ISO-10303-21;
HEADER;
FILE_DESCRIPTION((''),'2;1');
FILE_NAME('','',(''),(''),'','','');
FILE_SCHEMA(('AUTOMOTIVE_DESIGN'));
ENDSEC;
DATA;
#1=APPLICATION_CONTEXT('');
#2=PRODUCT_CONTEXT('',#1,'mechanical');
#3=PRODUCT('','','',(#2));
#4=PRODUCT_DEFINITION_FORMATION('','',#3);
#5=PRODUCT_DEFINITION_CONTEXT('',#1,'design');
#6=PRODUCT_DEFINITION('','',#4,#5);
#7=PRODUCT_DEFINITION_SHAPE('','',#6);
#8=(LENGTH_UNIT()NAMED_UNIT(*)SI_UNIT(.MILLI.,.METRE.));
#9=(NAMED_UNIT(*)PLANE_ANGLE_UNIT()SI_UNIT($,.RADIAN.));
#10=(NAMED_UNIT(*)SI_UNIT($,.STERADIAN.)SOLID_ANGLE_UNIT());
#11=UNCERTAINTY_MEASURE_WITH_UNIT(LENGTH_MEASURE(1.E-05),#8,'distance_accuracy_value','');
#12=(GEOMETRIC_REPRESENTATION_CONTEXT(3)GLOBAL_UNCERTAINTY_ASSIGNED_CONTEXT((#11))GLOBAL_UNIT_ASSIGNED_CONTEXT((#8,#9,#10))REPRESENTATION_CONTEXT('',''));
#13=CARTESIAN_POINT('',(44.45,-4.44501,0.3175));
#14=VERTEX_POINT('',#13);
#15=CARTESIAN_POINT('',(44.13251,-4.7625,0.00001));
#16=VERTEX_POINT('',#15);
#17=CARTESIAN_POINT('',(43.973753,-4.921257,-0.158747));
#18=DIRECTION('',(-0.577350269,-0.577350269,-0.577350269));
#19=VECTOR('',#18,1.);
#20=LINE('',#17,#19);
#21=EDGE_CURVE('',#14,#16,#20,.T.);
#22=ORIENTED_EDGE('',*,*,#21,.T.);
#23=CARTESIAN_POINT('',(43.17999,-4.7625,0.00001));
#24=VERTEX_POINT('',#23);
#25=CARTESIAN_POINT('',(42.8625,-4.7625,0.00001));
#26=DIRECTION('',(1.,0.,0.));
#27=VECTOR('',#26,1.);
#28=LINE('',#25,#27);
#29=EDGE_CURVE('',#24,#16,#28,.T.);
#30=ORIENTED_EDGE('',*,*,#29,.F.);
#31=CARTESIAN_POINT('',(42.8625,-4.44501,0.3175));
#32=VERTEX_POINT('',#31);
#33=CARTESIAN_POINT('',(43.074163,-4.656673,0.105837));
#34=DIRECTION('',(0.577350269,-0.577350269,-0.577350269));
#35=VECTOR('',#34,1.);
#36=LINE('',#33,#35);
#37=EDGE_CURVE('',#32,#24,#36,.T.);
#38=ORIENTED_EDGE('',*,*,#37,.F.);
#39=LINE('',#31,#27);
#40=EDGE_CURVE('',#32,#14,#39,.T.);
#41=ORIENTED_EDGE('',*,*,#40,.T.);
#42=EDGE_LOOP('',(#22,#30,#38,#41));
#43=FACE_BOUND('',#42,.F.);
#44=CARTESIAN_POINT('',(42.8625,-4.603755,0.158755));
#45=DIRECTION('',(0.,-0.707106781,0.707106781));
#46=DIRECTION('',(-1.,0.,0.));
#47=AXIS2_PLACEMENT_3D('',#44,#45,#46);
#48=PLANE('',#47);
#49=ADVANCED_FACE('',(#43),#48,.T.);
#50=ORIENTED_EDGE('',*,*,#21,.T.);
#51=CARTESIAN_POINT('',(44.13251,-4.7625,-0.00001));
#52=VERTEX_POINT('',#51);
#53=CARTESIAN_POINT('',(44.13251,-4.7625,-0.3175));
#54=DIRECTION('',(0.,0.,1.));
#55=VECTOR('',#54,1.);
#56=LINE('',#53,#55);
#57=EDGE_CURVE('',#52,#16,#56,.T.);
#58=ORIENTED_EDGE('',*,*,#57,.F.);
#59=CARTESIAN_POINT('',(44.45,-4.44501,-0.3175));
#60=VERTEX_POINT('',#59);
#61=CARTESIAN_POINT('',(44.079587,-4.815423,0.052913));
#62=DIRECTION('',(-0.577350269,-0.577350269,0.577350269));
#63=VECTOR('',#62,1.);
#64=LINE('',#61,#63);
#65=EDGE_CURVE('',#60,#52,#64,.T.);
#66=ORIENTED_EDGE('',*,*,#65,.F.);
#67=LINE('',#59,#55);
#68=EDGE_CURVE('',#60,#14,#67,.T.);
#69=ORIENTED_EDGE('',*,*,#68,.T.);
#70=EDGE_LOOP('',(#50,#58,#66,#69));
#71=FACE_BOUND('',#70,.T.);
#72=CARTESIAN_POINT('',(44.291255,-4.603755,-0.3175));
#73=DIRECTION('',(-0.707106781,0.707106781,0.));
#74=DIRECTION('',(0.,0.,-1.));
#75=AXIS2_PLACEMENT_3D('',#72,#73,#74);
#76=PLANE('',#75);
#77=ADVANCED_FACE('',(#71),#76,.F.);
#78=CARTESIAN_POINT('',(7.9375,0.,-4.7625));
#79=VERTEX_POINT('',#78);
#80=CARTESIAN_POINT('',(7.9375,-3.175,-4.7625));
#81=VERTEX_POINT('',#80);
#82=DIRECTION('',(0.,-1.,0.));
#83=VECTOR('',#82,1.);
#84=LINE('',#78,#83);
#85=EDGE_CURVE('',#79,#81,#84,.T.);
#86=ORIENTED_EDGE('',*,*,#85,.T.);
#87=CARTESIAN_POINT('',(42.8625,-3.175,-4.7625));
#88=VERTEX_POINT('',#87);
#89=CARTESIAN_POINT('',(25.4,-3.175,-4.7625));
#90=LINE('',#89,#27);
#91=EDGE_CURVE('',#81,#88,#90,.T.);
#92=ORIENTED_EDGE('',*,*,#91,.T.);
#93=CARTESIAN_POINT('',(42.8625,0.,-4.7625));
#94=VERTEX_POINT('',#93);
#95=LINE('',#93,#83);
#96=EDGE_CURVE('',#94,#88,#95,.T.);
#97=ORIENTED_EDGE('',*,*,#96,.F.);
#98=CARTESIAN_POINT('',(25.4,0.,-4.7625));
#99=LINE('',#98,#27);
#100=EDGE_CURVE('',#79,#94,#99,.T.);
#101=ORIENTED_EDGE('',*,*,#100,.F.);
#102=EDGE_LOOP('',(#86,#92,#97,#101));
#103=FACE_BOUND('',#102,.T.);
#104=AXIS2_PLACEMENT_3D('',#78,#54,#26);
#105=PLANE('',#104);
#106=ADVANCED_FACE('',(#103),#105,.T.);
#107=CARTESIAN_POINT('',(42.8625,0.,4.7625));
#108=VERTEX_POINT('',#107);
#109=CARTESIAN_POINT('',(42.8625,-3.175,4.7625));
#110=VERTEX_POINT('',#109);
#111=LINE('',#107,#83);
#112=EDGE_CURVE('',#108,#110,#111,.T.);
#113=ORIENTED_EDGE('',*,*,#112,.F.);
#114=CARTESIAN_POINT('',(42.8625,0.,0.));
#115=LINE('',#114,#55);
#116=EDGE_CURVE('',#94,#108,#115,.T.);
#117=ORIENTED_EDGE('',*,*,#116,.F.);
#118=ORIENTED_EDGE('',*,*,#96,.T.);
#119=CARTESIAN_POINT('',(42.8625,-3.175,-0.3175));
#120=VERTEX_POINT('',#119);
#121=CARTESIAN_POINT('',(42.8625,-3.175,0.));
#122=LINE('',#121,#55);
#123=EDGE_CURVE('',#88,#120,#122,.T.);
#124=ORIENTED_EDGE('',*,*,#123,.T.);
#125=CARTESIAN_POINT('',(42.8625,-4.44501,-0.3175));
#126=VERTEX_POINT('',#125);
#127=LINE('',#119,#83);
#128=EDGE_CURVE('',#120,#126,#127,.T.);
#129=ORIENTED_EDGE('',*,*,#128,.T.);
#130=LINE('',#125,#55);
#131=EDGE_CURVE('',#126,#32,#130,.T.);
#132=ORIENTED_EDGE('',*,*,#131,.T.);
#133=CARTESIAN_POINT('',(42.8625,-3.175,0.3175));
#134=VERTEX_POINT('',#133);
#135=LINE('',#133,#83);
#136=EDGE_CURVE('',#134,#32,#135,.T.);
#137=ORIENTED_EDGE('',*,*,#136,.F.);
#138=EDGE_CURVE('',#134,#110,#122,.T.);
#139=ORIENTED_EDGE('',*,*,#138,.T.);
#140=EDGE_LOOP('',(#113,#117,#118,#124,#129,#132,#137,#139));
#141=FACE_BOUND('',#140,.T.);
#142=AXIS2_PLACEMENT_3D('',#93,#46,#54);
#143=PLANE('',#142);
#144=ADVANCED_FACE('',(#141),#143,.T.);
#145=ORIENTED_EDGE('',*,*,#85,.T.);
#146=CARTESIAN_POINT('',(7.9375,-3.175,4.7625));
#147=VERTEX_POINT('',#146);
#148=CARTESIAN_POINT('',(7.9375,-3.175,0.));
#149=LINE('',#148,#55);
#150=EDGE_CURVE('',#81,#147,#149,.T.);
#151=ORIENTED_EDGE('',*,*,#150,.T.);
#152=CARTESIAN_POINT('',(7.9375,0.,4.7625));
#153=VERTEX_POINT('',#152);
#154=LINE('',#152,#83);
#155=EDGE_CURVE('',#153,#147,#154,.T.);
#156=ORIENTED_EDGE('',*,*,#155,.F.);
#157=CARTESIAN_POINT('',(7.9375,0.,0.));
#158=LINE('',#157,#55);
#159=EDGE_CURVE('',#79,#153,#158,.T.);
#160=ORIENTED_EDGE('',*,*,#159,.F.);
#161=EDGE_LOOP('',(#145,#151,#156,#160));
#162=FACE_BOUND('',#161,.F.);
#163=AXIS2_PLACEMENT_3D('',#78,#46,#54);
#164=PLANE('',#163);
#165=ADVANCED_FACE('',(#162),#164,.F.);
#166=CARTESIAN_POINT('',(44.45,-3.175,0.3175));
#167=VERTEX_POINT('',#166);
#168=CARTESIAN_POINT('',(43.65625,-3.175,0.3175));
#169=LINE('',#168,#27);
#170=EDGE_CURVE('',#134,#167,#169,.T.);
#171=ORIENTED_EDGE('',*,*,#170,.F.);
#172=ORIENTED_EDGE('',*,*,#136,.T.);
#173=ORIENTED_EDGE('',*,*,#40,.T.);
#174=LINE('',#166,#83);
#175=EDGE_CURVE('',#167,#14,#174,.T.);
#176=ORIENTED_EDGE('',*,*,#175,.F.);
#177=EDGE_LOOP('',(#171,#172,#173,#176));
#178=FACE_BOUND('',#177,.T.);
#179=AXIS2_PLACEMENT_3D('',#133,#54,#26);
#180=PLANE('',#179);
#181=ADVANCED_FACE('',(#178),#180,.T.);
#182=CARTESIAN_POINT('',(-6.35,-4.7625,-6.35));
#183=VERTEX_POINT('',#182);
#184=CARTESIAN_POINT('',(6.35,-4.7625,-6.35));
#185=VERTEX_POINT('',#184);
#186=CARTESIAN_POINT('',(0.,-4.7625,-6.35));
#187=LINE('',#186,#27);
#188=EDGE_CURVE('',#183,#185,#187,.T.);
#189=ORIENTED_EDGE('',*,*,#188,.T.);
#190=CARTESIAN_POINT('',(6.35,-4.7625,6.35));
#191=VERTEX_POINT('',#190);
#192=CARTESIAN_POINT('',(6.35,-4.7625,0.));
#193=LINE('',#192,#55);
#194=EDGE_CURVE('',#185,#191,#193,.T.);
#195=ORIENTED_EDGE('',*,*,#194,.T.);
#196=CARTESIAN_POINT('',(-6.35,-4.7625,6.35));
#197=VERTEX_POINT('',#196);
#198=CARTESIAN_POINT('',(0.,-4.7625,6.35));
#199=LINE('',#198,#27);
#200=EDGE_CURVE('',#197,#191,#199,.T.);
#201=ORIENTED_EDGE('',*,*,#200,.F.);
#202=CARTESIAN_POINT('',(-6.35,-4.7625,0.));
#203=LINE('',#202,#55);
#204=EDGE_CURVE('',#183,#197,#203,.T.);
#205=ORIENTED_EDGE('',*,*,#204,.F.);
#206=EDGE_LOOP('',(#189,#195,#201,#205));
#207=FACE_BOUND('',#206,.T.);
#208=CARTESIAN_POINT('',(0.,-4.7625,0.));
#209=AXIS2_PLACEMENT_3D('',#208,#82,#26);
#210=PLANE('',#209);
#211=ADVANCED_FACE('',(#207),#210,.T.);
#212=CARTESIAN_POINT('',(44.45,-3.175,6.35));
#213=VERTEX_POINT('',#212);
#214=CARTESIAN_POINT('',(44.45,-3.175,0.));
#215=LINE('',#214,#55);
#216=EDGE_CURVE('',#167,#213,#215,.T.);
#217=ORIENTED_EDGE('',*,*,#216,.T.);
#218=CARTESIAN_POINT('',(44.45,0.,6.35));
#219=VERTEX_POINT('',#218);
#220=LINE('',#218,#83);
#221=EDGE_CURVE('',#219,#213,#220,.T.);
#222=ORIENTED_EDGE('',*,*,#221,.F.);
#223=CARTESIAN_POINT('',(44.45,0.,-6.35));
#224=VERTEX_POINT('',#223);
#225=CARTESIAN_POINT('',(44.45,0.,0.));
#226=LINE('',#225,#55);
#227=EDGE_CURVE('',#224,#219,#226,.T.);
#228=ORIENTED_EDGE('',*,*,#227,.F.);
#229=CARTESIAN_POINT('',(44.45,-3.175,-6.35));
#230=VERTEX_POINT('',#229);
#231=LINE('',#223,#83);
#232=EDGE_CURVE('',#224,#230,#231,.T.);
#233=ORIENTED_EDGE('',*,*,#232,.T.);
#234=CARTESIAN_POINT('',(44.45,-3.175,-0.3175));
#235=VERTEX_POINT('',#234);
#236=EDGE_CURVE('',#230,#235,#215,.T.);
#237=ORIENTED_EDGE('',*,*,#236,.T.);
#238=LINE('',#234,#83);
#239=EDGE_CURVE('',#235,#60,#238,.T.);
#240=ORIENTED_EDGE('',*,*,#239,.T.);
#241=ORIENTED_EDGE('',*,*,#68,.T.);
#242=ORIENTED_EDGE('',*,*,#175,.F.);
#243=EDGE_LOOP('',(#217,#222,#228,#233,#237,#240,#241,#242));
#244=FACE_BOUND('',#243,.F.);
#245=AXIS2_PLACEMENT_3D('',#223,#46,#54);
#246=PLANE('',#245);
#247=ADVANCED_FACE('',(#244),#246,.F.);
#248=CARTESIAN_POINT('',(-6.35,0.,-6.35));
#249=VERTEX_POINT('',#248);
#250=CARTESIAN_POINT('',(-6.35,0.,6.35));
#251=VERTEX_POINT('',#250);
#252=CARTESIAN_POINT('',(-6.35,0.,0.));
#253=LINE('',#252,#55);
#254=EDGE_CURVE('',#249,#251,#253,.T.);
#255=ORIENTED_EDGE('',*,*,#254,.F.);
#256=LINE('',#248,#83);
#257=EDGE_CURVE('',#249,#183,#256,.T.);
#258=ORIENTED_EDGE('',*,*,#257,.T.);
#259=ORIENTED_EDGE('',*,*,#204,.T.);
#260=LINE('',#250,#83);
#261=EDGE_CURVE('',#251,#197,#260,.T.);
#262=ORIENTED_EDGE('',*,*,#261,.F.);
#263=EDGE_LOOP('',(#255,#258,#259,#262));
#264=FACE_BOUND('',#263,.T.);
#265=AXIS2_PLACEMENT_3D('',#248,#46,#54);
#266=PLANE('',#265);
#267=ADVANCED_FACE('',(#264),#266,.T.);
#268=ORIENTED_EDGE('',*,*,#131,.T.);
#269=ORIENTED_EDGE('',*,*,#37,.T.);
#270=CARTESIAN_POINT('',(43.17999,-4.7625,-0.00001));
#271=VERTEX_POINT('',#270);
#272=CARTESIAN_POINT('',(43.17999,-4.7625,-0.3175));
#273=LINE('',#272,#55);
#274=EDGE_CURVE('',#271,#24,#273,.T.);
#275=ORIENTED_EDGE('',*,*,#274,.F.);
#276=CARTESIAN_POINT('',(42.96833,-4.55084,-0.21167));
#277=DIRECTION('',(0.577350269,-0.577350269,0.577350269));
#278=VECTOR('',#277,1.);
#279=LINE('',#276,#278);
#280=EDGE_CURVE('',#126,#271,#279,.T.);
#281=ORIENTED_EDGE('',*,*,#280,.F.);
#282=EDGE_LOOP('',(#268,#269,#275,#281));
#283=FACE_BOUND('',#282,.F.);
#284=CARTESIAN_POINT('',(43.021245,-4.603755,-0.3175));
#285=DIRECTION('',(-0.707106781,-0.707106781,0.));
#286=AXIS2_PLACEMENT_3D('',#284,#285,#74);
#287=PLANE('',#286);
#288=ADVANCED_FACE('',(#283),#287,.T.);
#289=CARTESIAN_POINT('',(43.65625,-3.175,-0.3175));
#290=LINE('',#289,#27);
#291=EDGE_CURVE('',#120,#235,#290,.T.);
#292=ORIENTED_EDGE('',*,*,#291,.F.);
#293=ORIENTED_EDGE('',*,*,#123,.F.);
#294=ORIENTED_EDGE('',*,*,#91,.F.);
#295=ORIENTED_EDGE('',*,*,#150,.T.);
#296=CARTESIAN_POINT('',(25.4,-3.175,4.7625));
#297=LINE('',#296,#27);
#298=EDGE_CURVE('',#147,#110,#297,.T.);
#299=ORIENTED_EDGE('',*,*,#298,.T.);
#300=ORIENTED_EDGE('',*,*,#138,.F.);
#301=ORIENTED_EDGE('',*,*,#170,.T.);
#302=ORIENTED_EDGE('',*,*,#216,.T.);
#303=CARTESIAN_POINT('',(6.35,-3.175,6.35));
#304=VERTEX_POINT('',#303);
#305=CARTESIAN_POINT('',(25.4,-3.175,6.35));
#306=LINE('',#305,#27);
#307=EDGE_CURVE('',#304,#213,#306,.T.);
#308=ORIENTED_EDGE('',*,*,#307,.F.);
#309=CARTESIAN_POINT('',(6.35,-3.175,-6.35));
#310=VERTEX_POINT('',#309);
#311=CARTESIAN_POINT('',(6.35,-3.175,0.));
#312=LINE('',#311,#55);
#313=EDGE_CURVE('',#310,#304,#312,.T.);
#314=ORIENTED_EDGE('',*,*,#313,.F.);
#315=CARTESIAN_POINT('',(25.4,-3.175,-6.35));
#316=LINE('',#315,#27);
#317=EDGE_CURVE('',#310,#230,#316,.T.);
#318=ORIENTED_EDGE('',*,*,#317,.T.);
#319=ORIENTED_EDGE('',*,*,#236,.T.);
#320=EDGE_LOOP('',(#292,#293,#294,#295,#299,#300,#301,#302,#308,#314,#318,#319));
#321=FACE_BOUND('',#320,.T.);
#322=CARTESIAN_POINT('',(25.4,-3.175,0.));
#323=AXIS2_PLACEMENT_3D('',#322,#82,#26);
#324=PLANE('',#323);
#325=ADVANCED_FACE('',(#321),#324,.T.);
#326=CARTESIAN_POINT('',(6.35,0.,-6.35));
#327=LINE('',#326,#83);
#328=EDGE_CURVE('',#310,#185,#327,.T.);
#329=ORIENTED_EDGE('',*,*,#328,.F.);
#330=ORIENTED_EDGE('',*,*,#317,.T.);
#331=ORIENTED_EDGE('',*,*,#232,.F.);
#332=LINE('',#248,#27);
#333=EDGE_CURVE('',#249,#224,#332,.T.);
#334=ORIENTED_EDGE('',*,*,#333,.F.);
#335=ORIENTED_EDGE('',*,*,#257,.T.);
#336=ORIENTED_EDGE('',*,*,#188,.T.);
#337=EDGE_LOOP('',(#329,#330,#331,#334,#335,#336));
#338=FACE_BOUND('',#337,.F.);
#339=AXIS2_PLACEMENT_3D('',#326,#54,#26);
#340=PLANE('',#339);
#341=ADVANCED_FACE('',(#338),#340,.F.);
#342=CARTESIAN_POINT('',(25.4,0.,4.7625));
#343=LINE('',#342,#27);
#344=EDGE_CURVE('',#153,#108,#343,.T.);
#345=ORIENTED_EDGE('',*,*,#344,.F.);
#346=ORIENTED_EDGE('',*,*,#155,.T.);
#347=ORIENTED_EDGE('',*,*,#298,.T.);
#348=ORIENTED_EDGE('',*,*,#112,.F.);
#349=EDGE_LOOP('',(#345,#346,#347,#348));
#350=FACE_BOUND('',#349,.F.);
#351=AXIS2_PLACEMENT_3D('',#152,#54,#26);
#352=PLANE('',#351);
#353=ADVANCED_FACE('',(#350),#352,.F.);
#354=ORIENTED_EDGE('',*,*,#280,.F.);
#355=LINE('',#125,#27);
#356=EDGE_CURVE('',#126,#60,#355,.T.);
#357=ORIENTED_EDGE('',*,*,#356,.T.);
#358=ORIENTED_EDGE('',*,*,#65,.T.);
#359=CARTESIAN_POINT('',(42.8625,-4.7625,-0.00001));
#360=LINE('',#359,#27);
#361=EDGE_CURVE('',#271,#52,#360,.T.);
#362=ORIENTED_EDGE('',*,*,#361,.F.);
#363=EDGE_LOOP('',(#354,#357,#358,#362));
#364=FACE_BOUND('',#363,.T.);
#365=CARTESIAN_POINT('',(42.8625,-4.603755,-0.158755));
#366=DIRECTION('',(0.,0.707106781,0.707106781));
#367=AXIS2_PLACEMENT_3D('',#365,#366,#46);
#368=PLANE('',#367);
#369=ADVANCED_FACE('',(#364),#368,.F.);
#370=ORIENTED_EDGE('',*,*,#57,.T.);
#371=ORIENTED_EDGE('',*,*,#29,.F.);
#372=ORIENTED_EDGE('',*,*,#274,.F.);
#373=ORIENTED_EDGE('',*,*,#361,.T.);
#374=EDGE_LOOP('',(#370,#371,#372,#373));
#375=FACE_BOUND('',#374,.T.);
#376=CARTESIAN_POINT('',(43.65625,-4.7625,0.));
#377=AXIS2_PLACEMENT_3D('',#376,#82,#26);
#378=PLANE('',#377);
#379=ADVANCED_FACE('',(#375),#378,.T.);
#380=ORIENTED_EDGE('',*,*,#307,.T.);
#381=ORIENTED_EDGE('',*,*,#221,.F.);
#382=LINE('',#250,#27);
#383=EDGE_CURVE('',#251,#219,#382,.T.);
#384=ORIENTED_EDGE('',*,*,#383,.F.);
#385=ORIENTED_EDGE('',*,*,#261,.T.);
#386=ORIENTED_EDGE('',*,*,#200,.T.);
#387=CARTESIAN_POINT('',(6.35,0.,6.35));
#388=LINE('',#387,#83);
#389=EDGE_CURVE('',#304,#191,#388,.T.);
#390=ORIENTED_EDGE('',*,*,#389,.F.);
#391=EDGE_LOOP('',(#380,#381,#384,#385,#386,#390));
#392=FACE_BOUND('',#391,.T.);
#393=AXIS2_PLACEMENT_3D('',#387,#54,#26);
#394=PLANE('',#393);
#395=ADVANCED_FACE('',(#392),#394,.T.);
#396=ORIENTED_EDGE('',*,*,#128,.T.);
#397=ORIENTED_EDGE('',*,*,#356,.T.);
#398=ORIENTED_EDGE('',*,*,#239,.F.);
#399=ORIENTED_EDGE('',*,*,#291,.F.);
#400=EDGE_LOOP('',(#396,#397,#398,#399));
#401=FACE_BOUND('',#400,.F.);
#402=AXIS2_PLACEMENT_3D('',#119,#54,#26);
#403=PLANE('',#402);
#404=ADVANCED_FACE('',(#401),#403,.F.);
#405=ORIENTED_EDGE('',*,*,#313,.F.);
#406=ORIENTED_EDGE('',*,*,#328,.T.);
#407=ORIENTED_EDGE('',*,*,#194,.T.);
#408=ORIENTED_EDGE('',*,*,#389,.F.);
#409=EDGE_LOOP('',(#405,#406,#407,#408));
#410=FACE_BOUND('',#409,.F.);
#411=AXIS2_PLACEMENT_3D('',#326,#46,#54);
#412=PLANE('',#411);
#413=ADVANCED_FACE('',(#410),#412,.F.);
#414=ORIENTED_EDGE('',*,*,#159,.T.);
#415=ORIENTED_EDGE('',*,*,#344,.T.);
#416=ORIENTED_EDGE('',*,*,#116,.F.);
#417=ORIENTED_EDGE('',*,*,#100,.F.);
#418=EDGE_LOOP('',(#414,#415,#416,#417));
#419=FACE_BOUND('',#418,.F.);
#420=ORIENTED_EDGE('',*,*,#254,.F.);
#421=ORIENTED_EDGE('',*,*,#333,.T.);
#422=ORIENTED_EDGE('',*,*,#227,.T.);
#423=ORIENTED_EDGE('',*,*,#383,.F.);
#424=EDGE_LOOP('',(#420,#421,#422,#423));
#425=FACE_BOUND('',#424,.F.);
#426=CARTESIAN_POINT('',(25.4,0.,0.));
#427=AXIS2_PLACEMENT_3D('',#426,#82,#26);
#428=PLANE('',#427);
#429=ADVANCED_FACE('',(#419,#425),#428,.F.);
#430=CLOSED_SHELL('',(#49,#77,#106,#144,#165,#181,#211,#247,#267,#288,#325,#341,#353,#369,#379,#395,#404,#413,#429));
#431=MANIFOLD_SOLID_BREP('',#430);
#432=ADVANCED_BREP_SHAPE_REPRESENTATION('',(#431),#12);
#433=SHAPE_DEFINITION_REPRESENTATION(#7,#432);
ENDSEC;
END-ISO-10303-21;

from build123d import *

# Parameters (mm, degrees)
F0_W     = 12.7
F0_H     = 12.7
F1_DEPTH = 4.7625
F2_W     = 38.1
F2_H     = 12.7
F2_W_2   = 34.925
F2_H_2   = 9.525
F3_DEPTH = 3.175
F4_W     = 1.5875
F4_H     = 0.635
F5_DEPTH = 1.5875
F6_SIZE  = 0.31749


# Not quite as in the source:
# - a fillet or chamfer is up to 0.001 mm smaller than in the source, because OpenCascade refuses the exact size


with BuildPart() as f1:
    # F0 (on Front) → F1 (new body)
    with BuildSketch(Plane.XZ):
        Rectangle(F0_W, F0_H)
    extrude(amount=F1_DEPTH)

    # F2 (on Front) → F3 (join)
    with BuildSketch(Plane.XZ):
        with Locations((25.4, 0)):
            Rectangle(F2_W, F2_H)
        with Locations((25.4, 0)):
            Rectangle(F2_W_2, F2_H_2, mode=Mode.SUBTRACT)
    extrude(amount=F3_DEPTH)

    # F4 (on face) → F5 (join)
    with BuildSketch(Plane.XZ.offset(3.175)):
        with Locations((43.65625, 0)):
            Rectangle(F4_W, F4_H)
    extrude(amount=F5_DEPTH)

    # F6 (size 0.3175 in the source; OpenCascade refuses exactly that, so slightly less here)
    f6_edges = [f1.edges().sort_by_distance(p)[0] for p in [
        (43.65625, -4.7625, 0.3175),
        (42.8625, -4.7625, 0),
        (43.65625, -4.7625, -0.3175),
        (44.45, -4.7625, 0),
    ]]
    chamfer(f6_edges, length=F6_SIZE)


solid = f1.part
